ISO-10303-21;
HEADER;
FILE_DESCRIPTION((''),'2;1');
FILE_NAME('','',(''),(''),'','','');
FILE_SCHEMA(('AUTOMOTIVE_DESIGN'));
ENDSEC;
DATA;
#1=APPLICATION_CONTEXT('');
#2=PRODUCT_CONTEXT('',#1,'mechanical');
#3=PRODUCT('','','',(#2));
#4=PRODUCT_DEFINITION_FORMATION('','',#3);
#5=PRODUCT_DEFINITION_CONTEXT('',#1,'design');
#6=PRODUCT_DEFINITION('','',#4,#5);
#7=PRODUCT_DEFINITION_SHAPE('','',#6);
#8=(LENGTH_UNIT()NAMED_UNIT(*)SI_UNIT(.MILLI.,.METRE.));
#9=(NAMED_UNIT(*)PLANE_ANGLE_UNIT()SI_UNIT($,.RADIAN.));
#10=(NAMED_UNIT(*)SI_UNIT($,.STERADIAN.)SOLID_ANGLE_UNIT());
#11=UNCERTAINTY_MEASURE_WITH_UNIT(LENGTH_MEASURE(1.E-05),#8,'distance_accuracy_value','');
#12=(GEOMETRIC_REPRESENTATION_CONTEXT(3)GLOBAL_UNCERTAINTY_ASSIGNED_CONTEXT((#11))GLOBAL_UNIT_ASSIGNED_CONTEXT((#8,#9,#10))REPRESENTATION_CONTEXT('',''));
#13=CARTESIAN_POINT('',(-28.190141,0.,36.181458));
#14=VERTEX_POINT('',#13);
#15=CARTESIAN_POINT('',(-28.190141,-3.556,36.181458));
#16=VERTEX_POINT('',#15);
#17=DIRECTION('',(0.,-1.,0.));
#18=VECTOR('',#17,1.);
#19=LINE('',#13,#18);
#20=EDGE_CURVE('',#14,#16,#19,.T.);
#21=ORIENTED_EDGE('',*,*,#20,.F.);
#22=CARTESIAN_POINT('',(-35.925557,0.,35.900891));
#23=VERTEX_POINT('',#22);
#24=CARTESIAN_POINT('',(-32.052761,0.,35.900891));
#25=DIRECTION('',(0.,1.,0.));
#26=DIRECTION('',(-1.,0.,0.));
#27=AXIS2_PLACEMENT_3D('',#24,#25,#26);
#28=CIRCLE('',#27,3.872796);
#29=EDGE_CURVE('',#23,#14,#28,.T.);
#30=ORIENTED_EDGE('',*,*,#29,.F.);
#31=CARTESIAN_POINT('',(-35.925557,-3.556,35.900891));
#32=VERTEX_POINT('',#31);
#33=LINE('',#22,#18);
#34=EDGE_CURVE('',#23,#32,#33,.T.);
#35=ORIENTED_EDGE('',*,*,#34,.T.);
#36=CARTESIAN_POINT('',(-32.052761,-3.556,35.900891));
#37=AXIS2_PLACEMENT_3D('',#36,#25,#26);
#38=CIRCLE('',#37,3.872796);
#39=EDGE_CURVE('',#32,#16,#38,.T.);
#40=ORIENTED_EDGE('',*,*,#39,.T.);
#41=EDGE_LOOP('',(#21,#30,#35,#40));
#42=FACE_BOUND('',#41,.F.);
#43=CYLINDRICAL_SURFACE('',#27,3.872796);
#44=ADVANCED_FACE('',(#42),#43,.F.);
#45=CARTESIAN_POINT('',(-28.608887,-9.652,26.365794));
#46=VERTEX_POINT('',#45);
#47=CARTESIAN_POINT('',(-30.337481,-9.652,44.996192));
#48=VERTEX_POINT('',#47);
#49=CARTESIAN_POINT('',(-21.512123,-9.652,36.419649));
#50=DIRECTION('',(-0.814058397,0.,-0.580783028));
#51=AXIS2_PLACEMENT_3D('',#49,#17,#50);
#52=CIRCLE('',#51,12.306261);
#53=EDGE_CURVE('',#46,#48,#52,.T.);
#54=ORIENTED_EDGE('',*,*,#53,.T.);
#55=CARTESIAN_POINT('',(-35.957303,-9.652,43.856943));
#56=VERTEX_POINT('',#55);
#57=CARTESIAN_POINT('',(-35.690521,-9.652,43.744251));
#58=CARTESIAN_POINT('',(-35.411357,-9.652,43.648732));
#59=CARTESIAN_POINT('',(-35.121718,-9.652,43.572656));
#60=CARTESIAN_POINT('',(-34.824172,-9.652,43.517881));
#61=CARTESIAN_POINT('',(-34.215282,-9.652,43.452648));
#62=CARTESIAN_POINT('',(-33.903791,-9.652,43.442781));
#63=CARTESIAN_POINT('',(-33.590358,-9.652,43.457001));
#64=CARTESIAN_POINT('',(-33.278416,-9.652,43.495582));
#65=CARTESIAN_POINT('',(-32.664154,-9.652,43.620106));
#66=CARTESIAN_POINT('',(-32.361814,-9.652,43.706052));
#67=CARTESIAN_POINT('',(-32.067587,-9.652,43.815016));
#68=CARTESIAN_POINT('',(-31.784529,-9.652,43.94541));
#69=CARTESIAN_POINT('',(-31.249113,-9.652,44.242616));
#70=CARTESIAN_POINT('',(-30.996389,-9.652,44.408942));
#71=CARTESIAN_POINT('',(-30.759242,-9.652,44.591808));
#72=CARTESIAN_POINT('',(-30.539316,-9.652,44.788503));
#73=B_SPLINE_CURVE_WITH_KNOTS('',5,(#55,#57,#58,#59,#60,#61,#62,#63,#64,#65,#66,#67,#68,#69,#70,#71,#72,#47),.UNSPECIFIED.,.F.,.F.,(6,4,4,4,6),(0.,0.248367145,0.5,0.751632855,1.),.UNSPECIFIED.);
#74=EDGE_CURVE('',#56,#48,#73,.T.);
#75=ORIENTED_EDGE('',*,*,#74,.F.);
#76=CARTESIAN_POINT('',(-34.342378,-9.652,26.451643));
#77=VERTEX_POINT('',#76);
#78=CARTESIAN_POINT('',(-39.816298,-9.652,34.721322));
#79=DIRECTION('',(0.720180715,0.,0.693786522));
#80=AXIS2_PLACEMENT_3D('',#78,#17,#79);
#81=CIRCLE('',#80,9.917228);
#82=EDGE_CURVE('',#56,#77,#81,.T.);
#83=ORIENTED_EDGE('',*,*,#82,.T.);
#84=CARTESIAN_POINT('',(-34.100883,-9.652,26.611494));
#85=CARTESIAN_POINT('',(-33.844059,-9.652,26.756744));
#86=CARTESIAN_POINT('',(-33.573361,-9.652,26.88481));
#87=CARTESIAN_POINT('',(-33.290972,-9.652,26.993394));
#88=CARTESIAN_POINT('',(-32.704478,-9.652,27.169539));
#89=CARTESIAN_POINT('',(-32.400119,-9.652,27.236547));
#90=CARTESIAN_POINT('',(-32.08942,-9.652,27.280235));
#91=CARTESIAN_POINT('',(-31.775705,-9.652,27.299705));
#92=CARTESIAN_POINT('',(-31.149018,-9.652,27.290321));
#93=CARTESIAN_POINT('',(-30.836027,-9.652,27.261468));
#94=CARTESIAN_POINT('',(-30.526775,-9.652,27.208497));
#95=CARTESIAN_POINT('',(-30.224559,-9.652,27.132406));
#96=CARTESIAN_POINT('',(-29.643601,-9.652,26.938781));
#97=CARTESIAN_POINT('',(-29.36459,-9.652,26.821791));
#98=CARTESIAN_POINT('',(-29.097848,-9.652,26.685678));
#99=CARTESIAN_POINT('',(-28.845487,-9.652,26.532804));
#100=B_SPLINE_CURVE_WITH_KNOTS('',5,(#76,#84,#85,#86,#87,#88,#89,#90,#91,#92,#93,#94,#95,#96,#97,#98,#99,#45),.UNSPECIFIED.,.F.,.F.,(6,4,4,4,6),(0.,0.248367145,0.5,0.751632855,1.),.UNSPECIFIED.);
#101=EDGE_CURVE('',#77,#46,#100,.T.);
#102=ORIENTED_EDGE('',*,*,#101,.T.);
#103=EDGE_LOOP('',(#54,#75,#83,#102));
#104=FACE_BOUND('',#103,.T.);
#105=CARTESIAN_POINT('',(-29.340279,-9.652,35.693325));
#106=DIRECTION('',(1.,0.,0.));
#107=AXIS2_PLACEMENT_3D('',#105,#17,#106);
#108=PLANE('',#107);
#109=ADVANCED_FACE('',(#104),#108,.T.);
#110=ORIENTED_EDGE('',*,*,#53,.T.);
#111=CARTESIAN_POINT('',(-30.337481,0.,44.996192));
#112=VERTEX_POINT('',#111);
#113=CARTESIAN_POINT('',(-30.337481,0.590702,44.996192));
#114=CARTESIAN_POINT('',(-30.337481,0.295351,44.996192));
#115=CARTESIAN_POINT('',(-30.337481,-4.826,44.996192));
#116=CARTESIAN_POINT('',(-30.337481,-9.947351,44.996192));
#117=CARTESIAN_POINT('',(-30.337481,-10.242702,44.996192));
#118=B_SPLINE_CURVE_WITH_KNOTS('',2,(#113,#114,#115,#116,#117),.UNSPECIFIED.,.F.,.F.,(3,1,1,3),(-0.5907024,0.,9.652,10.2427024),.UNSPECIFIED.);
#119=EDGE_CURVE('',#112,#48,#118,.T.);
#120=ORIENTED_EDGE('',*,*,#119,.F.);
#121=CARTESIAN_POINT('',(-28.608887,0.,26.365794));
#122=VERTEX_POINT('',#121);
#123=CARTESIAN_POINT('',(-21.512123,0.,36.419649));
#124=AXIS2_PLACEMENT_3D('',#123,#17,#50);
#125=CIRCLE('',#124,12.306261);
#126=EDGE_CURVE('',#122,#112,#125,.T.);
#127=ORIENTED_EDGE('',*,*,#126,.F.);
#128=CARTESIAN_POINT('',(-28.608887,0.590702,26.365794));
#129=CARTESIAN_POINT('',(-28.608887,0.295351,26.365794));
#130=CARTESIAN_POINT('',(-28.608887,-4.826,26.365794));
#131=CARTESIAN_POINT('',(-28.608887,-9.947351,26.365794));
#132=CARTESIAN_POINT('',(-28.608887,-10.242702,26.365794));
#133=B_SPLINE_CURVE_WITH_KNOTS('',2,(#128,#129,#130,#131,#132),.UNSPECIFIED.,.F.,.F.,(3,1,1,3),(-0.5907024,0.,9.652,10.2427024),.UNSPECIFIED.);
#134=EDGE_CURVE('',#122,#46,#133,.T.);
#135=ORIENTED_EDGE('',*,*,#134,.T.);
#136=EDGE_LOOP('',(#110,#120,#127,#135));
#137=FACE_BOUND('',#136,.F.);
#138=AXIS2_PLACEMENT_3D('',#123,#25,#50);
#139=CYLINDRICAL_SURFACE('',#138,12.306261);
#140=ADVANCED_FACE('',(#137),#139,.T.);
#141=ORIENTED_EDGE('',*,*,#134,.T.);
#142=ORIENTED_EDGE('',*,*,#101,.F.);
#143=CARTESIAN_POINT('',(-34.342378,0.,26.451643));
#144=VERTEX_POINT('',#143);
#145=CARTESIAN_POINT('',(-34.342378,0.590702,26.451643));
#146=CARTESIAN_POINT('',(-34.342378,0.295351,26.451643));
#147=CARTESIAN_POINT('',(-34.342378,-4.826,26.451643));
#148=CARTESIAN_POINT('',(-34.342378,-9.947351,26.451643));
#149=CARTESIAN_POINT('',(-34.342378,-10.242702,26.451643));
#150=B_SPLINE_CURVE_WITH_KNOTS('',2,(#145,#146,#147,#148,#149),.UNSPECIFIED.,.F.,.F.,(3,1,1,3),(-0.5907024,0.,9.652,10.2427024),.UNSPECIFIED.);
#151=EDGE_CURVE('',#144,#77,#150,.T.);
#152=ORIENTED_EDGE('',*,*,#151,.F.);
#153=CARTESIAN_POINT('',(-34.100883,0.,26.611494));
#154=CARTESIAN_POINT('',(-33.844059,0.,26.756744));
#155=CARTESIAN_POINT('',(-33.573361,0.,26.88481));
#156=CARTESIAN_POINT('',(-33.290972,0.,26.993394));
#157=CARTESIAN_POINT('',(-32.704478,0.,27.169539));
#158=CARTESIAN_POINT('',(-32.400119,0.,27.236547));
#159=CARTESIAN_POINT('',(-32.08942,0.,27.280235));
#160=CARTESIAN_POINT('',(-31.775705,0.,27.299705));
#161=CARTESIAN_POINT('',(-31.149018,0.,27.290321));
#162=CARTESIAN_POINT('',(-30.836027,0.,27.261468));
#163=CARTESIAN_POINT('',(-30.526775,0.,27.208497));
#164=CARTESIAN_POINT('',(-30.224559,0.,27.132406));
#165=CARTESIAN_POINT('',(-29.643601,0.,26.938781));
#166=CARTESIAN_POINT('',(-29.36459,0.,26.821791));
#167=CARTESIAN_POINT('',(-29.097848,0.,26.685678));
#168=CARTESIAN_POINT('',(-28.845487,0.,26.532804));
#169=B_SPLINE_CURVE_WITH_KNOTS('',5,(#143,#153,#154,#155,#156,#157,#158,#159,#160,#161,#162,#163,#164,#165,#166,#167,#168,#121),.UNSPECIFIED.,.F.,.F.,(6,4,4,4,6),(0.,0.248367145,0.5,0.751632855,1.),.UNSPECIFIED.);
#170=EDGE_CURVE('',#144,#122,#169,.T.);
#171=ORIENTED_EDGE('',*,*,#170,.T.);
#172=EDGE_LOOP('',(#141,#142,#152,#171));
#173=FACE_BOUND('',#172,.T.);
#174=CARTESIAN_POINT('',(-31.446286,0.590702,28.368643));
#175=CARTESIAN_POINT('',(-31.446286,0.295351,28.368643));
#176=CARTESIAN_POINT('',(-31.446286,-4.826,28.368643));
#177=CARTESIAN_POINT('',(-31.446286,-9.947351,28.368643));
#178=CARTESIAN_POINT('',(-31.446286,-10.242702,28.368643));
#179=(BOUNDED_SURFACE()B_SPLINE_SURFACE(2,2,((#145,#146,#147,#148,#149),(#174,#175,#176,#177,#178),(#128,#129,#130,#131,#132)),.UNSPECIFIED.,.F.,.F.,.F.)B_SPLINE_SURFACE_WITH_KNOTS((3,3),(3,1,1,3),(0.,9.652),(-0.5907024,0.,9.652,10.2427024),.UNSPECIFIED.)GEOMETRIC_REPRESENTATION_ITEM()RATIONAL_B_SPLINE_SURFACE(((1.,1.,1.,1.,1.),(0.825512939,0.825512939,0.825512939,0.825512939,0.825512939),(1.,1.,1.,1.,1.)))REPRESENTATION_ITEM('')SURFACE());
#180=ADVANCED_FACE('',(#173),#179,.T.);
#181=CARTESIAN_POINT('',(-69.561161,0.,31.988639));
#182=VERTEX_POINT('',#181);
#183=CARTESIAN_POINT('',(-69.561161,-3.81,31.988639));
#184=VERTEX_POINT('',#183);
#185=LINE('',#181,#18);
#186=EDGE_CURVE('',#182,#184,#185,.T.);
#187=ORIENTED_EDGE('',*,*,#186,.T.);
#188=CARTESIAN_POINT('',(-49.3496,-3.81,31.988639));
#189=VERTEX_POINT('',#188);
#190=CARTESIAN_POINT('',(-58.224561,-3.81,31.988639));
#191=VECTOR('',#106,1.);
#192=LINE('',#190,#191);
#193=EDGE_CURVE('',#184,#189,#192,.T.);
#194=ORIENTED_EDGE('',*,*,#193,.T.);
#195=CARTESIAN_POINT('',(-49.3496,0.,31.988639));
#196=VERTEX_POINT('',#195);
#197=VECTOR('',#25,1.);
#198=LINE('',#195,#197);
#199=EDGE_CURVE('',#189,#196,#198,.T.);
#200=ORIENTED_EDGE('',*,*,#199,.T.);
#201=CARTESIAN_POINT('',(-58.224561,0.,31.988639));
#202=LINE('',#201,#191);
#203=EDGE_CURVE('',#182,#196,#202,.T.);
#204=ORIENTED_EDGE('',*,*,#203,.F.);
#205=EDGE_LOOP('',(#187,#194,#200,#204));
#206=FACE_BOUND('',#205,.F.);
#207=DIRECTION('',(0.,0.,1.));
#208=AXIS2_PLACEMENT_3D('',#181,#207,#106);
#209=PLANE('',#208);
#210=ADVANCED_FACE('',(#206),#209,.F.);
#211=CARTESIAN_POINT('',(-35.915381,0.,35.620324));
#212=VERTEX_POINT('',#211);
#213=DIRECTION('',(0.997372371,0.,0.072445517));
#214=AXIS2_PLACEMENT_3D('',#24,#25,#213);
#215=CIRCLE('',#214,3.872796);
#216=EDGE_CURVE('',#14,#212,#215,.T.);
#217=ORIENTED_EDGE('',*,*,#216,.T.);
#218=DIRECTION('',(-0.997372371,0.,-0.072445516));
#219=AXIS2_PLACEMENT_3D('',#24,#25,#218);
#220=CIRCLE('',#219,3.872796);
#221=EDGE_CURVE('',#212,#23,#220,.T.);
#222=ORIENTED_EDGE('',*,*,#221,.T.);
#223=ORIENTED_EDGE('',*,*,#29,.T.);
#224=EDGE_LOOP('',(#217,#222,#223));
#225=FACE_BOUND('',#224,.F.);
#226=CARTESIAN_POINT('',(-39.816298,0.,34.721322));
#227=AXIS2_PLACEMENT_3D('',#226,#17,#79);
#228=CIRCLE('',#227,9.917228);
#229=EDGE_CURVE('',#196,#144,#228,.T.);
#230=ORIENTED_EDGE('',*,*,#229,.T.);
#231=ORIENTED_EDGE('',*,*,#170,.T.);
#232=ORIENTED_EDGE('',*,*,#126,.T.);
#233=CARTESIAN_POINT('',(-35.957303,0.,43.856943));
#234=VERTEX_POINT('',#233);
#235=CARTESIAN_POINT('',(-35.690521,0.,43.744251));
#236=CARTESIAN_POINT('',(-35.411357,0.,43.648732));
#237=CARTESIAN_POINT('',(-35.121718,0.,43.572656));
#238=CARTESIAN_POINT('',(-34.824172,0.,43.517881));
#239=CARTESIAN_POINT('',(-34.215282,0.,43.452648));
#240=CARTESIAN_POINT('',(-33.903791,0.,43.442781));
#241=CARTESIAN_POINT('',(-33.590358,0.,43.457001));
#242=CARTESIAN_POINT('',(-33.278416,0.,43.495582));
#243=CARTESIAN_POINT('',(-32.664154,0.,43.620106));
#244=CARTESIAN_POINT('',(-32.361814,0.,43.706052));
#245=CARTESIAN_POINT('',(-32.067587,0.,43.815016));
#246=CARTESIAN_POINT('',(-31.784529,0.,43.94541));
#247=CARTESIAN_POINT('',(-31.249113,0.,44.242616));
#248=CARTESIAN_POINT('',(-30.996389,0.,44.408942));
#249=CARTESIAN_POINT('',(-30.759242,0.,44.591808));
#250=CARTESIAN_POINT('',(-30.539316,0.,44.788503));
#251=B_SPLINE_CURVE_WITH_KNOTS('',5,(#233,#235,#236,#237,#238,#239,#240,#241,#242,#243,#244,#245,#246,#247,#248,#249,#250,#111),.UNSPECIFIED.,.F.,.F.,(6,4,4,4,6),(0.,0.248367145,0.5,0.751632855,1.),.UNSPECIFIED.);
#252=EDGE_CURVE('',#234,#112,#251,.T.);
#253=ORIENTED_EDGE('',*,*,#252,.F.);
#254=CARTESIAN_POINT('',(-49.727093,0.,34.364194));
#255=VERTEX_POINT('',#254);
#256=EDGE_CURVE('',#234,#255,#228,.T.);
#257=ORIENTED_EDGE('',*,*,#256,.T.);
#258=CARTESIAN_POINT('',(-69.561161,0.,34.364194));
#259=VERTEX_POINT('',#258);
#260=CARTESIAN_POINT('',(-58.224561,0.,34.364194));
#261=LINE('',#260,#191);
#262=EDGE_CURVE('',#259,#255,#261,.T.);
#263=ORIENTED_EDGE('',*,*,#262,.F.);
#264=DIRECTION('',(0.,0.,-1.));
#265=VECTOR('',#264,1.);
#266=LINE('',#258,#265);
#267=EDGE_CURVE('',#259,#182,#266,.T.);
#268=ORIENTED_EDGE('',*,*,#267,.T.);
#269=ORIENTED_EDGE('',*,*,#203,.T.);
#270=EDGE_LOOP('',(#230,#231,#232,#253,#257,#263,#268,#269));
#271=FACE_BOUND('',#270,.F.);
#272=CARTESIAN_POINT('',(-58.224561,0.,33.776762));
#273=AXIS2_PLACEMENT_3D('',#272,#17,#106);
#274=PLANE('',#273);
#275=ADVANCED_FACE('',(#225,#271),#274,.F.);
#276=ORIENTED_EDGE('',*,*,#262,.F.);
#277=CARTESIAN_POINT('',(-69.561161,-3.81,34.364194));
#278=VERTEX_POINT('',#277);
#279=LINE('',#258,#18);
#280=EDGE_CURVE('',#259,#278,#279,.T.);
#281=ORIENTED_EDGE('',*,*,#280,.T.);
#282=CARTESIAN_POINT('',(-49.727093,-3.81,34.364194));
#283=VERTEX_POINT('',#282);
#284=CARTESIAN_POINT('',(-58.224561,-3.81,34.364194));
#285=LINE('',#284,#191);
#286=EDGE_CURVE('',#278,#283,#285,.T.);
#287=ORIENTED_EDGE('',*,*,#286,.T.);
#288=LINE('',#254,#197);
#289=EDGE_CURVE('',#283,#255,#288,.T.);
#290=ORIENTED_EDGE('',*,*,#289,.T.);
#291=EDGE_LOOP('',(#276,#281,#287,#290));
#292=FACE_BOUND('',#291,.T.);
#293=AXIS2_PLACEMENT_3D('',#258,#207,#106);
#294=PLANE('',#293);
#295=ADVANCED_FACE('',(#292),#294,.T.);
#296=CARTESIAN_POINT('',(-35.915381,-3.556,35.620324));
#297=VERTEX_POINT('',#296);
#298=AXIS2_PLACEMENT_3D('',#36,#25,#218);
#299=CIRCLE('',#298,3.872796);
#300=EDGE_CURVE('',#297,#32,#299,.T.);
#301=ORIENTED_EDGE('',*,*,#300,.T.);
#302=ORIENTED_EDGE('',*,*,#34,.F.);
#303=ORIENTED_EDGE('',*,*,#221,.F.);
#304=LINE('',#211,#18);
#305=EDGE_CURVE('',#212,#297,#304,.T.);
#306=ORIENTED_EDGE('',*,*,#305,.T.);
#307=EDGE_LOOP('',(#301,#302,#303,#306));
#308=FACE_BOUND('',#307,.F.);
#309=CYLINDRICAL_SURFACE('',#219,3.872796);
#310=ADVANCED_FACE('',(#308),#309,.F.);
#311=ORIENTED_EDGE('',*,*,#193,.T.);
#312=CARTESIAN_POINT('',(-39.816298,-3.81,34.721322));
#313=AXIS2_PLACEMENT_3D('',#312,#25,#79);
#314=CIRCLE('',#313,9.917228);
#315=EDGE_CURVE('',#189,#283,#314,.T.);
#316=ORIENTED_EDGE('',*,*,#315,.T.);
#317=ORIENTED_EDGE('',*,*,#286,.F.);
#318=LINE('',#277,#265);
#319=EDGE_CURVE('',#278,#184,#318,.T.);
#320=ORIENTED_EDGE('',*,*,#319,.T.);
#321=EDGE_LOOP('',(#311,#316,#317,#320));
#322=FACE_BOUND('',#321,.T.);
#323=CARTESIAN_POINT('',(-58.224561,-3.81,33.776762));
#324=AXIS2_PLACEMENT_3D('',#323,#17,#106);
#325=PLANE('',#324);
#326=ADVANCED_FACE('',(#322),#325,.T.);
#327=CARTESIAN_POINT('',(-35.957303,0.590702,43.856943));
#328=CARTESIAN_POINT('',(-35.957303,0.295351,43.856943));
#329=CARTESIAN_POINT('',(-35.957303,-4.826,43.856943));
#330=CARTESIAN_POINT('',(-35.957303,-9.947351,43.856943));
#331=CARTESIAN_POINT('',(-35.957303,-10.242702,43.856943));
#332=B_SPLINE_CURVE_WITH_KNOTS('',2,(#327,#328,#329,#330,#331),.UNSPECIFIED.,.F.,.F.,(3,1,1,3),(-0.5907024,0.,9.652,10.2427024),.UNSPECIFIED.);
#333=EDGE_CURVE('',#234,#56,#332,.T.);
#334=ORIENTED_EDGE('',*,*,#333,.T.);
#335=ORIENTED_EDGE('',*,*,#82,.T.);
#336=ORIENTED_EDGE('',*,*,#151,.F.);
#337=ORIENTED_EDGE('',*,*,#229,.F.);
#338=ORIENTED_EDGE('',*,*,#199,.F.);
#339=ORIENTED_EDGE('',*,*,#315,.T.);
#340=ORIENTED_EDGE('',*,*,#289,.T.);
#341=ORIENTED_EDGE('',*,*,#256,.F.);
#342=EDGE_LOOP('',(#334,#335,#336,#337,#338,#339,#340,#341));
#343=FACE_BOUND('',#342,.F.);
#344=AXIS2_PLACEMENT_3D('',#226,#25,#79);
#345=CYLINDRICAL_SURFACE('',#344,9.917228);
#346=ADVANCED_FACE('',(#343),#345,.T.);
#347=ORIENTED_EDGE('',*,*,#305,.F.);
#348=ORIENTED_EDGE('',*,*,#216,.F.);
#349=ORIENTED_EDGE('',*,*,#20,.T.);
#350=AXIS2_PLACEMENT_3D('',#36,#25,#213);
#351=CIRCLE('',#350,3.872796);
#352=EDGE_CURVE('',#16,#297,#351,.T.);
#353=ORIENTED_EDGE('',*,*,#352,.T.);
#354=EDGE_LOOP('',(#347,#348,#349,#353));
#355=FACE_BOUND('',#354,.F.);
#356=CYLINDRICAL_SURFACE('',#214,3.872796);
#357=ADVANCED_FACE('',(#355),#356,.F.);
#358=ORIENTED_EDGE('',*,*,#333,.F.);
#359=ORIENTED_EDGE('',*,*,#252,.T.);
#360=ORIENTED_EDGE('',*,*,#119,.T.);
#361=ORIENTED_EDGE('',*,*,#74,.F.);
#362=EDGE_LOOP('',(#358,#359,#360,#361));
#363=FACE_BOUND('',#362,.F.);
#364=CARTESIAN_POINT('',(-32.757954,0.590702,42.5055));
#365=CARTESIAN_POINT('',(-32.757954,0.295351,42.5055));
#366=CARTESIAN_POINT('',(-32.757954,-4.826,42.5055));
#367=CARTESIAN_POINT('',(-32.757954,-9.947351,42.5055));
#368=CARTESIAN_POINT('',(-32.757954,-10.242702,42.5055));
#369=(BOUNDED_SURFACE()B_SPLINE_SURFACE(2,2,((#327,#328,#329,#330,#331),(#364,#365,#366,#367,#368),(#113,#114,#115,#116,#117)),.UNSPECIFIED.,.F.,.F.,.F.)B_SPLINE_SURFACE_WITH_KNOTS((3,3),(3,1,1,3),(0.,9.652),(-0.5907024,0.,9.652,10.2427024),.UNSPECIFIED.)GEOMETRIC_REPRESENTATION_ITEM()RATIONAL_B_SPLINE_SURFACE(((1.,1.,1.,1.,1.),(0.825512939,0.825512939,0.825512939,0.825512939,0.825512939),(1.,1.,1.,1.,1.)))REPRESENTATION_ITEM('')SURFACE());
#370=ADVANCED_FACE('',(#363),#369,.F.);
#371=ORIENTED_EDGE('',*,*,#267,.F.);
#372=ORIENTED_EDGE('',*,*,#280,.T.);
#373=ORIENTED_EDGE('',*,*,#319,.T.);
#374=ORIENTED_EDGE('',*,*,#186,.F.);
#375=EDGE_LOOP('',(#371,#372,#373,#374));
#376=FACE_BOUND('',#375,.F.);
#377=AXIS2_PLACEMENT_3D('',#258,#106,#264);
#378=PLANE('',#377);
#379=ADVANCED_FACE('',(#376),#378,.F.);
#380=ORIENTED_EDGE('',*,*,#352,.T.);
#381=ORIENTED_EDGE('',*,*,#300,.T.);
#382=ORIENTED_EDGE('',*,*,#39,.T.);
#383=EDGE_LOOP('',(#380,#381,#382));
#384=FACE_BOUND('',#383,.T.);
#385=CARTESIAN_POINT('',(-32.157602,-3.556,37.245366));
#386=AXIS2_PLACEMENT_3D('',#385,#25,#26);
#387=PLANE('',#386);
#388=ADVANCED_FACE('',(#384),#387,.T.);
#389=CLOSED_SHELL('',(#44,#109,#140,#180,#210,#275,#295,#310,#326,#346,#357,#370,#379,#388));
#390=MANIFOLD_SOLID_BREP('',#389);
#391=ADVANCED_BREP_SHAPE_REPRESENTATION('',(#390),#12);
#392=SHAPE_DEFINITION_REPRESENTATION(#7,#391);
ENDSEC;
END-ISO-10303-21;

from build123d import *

# Parameters (mm, degrees)
F1_DEPTH = 9.652
F2_W     = 22.6732008159
F2_H     = 1.1748634279
F2_H_2   = 1.2006908655
F3_DEPTH = 3.81
F4_R     = 5.08
F6_DEPTH = 3.556


with BuildPart() as f1:
    # F0 (on Front) → F1 (new body)
    with BuildSketch(Plane.XZ):
        with BuildLine():
            ThreePointArc((-31.5301379097, 29.2723811601), (-9.2584932634, 37.5565839315), (-32.6741015598, 41.6017611729))
            ThreePointArc((-32.6741015598, 41.6017611729), (-49.691111152, 33.8051020972), (-31.5301379097, 29.2723811601))
        make_face()
    extrude(amount=F1_DEPTH)

    # F2 (on Front) → F3 (join)
    with BuildSketch(Plane.XZ):
        with Locations((-58.2245606929, 33.776761964)):
            Rectangle(F2_W, F2_H)
        with Locations((-58.2245606929, 32.5889848173)):
            Rectangle(F2_W, F2_H_2)
    extrude(amount=F3_DEPTH)

    # F4
    f4_edges = [f1.edges().sort_by_distance(p)[0] for p in [
        (-32.674102, -4.826, 41.601761),
        (-31.530138, -4.826, 29.272381),
    ]]
    fillet(f4_edges, radius=F4_R)

    # F5 (on face) → F6 (cut)
    with BuildSketch(Plane(origin=(0, 0, 0), x_dir=(-1, 0, 0), z_dir=(0, 1, 0))):
        with BuildLine():
            ThreePointArc((35.9255568085, 35.9008908942), (32.1931363304, 39.7711420697), (28.1901409202, 36.1814576083))
            Line((28.1901409202, 36.1814576083), (35.9153805385, 35.6203241801))
            ThreePointArc((35.9153805385, 35.6203241801), (35.9230119048, 35.7605152931), (35.9255568085, 35.9008908942))
        make_face()
        with BuildLine():
            Line((35.9153805385, 35.6203241801), (28.1901409202, 36.1814576083))
            ThreePointArc((28.1901409202, 36.1814576083), (31.7721940152, 32.038271085), (35.9153805385, 35.6203241801))
        make_face()
    extrude(amount=-F6_DEPTH, mode=Mode.SUBTRACT)


solid = f1.part
